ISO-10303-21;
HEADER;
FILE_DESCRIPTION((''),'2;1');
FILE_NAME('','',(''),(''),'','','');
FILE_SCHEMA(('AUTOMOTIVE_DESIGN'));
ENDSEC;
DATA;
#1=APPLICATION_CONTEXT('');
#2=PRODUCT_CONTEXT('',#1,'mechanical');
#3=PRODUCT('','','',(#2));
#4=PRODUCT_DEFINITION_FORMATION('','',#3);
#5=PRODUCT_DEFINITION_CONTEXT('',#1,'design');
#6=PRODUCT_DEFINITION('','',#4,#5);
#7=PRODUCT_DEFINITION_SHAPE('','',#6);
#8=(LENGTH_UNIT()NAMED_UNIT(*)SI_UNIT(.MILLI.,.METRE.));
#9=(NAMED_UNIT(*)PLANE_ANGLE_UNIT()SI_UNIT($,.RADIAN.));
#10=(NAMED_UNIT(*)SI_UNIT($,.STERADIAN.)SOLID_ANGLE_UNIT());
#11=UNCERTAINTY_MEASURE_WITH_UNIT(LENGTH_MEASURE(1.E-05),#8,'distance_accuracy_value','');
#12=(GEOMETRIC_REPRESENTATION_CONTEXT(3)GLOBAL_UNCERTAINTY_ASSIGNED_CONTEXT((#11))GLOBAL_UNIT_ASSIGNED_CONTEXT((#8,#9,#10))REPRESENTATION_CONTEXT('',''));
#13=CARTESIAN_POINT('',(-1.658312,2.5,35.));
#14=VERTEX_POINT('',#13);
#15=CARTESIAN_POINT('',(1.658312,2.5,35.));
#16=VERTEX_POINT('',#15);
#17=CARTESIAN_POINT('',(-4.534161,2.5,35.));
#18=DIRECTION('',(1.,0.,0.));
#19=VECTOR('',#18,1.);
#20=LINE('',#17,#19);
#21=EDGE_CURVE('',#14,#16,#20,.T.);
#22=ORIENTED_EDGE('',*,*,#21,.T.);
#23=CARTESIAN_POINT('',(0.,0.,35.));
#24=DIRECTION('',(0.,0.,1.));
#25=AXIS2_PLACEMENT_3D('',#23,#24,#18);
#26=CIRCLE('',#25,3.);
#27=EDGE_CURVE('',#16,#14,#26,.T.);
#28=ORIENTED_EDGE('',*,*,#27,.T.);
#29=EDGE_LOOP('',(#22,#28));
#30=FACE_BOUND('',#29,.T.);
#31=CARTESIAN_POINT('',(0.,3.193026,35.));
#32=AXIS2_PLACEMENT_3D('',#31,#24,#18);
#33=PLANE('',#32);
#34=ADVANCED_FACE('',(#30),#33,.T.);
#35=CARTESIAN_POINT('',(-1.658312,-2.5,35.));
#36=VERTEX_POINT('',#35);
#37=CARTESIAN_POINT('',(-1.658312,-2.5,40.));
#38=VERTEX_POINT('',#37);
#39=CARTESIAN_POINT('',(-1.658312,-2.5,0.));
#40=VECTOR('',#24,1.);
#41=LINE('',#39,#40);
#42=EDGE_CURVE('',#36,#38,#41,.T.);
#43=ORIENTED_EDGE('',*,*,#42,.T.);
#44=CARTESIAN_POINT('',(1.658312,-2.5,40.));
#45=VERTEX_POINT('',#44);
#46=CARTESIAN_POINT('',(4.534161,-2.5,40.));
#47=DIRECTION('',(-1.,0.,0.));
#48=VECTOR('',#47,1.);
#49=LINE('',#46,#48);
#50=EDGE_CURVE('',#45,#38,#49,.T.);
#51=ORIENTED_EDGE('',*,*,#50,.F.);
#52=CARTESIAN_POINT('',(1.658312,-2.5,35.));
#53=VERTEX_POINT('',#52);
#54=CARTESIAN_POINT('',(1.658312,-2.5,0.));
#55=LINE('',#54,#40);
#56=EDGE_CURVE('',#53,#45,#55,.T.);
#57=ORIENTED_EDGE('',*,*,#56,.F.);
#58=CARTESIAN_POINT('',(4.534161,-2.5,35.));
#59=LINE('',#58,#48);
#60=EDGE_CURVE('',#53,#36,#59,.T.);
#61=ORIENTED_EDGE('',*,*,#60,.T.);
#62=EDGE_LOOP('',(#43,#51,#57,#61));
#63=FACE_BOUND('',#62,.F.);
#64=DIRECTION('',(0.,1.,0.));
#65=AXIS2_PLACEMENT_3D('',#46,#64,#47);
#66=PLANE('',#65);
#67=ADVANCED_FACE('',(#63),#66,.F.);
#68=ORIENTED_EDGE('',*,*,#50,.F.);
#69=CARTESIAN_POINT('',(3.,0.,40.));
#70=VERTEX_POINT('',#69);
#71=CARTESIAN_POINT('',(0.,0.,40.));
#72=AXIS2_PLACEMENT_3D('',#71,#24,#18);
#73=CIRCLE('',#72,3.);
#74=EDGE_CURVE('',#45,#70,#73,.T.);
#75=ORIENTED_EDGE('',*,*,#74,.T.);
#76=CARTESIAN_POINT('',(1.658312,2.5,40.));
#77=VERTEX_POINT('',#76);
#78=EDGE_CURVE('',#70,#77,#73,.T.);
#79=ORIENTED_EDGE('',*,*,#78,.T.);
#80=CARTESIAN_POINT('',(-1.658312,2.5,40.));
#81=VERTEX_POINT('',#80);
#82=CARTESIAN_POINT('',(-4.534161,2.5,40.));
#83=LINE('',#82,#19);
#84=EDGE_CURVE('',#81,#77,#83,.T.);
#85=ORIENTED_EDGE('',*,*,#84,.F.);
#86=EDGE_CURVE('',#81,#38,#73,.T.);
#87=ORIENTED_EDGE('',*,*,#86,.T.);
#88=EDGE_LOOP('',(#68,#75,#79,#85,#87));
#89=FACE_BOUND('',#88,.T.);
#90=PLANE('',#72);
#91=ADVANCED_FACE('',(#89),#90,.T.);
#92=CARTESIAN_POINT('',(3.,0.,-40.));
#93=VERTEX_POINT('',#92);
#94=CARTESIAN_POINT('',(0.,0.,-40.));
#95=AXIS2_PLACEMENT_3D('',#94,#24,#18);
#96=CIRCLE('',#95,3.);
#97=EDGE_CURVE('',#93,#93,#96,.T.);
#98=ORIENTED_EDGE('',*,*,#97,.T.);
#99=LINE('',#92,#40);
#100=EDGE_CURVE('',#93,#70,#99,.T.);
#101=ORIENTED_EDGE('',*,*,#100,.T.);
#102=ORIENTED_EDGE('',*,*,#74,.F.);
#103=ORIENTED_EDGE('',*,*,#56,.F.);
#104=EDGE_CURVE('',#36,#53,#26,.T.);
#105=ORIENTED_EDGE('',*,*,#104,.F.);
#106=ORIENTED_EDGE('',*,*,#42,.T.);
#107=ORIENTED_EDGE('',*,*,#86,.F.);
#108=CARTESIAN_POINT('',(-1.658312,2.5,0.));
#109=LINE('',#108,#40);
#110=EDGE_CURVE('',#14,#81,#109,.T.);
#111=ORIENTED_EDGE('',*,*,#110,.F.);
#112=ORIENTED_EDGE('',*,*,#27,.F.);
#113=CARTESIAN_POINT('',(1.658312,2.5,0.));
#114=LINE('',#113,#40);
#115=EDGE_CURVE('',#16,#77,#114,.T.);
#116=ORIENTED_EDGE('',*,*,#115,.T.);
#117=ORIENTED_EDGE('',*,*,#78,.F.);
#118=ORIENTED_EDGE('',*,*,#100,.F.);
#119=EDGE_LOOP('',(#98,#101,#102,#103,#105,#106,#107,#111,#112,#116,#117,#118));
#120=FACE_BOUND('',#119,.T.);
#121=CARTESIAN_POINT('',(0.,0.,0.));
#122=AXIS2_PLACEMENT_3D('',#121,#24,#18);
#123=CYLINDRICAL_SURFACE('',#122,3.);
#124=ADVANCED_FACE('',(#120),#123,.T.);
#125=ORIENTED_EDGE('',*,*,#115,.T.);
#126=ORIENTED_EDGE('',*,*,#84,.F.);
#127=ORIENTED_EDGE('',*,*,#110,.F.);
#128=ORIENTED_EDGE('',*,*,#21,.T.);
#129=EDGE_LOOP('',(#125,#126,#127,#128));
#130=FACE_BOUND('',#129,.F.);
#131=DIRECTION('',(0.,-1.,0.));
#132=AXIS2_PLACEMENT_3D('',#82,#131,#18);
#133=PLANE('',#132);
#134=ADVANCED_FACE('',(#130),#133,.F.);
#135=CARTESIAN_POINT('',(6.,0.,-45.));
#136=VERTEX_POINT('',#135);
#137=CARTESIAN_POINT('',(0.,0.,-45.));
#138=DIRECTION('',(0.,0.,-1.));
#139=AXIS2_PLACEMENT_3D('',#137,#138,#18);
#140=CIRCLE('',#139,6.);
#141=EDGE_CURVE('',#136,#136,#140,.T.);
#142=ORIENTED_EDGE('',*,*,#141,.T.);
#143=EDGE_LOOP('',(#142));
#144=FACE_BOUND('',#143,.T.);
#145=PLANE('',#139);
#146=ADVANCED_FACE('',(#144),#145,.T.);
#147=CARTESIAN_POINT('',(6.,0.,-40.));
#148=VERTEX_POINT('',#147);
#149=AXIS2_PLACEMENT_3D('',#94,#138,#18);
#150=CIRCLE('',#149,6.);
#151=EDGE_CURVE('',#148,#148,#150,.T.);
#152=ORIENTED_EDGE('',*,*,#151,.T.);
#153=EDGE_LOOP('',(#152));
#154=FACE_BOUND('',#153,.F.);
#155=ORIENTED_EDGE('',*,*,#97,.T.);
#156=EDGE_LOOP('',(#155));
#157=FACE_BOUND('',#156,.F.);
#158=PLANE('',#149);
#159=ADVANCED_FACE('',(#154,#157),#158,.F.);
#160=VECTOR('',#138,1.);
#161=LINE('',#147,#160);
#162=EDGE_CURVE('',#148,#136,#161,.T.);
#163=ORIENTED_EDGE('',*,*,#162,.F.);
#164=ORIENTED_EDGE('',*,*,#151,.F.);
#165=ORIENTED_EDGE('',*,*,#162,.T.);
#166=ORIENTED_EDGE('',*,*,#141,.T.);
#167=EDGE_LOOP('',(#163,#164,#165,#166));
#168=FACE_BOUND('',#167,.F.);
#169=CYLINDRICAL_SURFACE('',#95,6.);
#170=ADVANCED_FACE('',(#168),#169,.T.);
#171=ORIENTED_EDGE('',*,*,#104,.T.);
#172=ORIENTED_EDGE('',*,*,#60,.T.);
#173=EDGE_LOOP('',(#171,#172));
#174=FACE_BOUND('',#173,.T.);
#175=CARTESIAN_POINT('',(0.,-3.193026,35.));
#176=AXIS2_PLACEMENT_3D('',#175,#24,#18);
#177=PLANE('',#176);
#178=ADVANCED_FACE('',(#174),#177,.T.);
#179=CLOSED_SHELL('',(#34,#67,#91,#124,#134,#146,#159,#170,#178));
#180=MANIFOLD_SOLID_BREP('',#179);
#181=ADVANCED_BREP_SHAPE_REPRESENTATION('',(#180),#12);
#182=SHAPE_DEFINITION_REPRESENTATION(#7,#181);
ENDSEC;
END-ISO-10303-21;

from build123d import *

# Parameters (mm, degrees)
F0_R     = 3
F1_DEPTH = 40
F2_R     = 6
F2_R_2   = 3
F3_DEPTH = 5
F5_DEPTH = 5


with BuildPart() as f1:
    # F0 (on Top) → F1 (new body, symmetric)
    with BuildSketch(Plane.XY):
        Circle(F0_R)
    extrude(amount=F1_DEPTH, both=True)

    # F2 (on face) → F3 (join)
    with BuildSketch(Plane(origin=(0, 0, -40), x_dir=(1, 0, 0), z_dir=(0, 0, -1))):
        Circle(F2_R)
        Circle(F2_R_2, mode=Mode.SUBTRACT)
        Circle(F2_R_2)
    extrude(amount=F3_DEPTH)

    # F4 (on face) → F5 (cut)
    with BuildSketch(Plane.XY.offset(40)):
        with BuildLine():
            Line((4.5341607578, -3.7982849256), (4.5341607578, -2.5))
            Line((4.5341607578, -2.5), (1.6583123952, -2.5))
            ThreePointArc((1.6583123952, -2.5), (0, -3), (-1.6583123952, -2.5))
            Line((-1.6583123952, -2.5), (-4.5341607578, -2.5))
            Line((-4.5341607578, -2.5), (-4.5341607578, -3.7982849256))
            Line((-4.5341607578, -3.7982849256), (4.5341607578, -3.7982849256))
        make_face()
        with BuildLine():
            ThreePointArc((-1.6583123952, -2.5), (0, -3), (1.6583123952, -2.5))
            Line((1.6583123952, -2.5), (-1.6583123952, -2.5))
        make_face()
        with BuildLine():
            Line((1.6583123952, 2.5), (4.5341607578, 2.5))
            Line((4.5341607578, 2.5), (4.5341607578, 3.7982849256))
            Line((4.5341607578, 3.7982849256), (-4.5341607578, 3.7982849256))
            Line((-4.5341607578, 3.7982849256), (-4.5341607578, 2.5))
            Line((-4.5341607578, 2.5), (-1.6583123952, 2.5))
            ThreePointArc((-1.6583123952, 2.5), (0, 3), (1.6583123952, 2.5))
        make_face()
        with BuildLine():
            Line((-1.6583123952, 2.5), (1.6583123952, 2.5))
            ThreePointArc((1.6583123952, 2.5), (0, 3), (-1.6583123952, 2.5))
        make_face()
    extrude(amount=-F5_DEPTH, mode=Mode.SUBTRACT)


solid = f1.part
